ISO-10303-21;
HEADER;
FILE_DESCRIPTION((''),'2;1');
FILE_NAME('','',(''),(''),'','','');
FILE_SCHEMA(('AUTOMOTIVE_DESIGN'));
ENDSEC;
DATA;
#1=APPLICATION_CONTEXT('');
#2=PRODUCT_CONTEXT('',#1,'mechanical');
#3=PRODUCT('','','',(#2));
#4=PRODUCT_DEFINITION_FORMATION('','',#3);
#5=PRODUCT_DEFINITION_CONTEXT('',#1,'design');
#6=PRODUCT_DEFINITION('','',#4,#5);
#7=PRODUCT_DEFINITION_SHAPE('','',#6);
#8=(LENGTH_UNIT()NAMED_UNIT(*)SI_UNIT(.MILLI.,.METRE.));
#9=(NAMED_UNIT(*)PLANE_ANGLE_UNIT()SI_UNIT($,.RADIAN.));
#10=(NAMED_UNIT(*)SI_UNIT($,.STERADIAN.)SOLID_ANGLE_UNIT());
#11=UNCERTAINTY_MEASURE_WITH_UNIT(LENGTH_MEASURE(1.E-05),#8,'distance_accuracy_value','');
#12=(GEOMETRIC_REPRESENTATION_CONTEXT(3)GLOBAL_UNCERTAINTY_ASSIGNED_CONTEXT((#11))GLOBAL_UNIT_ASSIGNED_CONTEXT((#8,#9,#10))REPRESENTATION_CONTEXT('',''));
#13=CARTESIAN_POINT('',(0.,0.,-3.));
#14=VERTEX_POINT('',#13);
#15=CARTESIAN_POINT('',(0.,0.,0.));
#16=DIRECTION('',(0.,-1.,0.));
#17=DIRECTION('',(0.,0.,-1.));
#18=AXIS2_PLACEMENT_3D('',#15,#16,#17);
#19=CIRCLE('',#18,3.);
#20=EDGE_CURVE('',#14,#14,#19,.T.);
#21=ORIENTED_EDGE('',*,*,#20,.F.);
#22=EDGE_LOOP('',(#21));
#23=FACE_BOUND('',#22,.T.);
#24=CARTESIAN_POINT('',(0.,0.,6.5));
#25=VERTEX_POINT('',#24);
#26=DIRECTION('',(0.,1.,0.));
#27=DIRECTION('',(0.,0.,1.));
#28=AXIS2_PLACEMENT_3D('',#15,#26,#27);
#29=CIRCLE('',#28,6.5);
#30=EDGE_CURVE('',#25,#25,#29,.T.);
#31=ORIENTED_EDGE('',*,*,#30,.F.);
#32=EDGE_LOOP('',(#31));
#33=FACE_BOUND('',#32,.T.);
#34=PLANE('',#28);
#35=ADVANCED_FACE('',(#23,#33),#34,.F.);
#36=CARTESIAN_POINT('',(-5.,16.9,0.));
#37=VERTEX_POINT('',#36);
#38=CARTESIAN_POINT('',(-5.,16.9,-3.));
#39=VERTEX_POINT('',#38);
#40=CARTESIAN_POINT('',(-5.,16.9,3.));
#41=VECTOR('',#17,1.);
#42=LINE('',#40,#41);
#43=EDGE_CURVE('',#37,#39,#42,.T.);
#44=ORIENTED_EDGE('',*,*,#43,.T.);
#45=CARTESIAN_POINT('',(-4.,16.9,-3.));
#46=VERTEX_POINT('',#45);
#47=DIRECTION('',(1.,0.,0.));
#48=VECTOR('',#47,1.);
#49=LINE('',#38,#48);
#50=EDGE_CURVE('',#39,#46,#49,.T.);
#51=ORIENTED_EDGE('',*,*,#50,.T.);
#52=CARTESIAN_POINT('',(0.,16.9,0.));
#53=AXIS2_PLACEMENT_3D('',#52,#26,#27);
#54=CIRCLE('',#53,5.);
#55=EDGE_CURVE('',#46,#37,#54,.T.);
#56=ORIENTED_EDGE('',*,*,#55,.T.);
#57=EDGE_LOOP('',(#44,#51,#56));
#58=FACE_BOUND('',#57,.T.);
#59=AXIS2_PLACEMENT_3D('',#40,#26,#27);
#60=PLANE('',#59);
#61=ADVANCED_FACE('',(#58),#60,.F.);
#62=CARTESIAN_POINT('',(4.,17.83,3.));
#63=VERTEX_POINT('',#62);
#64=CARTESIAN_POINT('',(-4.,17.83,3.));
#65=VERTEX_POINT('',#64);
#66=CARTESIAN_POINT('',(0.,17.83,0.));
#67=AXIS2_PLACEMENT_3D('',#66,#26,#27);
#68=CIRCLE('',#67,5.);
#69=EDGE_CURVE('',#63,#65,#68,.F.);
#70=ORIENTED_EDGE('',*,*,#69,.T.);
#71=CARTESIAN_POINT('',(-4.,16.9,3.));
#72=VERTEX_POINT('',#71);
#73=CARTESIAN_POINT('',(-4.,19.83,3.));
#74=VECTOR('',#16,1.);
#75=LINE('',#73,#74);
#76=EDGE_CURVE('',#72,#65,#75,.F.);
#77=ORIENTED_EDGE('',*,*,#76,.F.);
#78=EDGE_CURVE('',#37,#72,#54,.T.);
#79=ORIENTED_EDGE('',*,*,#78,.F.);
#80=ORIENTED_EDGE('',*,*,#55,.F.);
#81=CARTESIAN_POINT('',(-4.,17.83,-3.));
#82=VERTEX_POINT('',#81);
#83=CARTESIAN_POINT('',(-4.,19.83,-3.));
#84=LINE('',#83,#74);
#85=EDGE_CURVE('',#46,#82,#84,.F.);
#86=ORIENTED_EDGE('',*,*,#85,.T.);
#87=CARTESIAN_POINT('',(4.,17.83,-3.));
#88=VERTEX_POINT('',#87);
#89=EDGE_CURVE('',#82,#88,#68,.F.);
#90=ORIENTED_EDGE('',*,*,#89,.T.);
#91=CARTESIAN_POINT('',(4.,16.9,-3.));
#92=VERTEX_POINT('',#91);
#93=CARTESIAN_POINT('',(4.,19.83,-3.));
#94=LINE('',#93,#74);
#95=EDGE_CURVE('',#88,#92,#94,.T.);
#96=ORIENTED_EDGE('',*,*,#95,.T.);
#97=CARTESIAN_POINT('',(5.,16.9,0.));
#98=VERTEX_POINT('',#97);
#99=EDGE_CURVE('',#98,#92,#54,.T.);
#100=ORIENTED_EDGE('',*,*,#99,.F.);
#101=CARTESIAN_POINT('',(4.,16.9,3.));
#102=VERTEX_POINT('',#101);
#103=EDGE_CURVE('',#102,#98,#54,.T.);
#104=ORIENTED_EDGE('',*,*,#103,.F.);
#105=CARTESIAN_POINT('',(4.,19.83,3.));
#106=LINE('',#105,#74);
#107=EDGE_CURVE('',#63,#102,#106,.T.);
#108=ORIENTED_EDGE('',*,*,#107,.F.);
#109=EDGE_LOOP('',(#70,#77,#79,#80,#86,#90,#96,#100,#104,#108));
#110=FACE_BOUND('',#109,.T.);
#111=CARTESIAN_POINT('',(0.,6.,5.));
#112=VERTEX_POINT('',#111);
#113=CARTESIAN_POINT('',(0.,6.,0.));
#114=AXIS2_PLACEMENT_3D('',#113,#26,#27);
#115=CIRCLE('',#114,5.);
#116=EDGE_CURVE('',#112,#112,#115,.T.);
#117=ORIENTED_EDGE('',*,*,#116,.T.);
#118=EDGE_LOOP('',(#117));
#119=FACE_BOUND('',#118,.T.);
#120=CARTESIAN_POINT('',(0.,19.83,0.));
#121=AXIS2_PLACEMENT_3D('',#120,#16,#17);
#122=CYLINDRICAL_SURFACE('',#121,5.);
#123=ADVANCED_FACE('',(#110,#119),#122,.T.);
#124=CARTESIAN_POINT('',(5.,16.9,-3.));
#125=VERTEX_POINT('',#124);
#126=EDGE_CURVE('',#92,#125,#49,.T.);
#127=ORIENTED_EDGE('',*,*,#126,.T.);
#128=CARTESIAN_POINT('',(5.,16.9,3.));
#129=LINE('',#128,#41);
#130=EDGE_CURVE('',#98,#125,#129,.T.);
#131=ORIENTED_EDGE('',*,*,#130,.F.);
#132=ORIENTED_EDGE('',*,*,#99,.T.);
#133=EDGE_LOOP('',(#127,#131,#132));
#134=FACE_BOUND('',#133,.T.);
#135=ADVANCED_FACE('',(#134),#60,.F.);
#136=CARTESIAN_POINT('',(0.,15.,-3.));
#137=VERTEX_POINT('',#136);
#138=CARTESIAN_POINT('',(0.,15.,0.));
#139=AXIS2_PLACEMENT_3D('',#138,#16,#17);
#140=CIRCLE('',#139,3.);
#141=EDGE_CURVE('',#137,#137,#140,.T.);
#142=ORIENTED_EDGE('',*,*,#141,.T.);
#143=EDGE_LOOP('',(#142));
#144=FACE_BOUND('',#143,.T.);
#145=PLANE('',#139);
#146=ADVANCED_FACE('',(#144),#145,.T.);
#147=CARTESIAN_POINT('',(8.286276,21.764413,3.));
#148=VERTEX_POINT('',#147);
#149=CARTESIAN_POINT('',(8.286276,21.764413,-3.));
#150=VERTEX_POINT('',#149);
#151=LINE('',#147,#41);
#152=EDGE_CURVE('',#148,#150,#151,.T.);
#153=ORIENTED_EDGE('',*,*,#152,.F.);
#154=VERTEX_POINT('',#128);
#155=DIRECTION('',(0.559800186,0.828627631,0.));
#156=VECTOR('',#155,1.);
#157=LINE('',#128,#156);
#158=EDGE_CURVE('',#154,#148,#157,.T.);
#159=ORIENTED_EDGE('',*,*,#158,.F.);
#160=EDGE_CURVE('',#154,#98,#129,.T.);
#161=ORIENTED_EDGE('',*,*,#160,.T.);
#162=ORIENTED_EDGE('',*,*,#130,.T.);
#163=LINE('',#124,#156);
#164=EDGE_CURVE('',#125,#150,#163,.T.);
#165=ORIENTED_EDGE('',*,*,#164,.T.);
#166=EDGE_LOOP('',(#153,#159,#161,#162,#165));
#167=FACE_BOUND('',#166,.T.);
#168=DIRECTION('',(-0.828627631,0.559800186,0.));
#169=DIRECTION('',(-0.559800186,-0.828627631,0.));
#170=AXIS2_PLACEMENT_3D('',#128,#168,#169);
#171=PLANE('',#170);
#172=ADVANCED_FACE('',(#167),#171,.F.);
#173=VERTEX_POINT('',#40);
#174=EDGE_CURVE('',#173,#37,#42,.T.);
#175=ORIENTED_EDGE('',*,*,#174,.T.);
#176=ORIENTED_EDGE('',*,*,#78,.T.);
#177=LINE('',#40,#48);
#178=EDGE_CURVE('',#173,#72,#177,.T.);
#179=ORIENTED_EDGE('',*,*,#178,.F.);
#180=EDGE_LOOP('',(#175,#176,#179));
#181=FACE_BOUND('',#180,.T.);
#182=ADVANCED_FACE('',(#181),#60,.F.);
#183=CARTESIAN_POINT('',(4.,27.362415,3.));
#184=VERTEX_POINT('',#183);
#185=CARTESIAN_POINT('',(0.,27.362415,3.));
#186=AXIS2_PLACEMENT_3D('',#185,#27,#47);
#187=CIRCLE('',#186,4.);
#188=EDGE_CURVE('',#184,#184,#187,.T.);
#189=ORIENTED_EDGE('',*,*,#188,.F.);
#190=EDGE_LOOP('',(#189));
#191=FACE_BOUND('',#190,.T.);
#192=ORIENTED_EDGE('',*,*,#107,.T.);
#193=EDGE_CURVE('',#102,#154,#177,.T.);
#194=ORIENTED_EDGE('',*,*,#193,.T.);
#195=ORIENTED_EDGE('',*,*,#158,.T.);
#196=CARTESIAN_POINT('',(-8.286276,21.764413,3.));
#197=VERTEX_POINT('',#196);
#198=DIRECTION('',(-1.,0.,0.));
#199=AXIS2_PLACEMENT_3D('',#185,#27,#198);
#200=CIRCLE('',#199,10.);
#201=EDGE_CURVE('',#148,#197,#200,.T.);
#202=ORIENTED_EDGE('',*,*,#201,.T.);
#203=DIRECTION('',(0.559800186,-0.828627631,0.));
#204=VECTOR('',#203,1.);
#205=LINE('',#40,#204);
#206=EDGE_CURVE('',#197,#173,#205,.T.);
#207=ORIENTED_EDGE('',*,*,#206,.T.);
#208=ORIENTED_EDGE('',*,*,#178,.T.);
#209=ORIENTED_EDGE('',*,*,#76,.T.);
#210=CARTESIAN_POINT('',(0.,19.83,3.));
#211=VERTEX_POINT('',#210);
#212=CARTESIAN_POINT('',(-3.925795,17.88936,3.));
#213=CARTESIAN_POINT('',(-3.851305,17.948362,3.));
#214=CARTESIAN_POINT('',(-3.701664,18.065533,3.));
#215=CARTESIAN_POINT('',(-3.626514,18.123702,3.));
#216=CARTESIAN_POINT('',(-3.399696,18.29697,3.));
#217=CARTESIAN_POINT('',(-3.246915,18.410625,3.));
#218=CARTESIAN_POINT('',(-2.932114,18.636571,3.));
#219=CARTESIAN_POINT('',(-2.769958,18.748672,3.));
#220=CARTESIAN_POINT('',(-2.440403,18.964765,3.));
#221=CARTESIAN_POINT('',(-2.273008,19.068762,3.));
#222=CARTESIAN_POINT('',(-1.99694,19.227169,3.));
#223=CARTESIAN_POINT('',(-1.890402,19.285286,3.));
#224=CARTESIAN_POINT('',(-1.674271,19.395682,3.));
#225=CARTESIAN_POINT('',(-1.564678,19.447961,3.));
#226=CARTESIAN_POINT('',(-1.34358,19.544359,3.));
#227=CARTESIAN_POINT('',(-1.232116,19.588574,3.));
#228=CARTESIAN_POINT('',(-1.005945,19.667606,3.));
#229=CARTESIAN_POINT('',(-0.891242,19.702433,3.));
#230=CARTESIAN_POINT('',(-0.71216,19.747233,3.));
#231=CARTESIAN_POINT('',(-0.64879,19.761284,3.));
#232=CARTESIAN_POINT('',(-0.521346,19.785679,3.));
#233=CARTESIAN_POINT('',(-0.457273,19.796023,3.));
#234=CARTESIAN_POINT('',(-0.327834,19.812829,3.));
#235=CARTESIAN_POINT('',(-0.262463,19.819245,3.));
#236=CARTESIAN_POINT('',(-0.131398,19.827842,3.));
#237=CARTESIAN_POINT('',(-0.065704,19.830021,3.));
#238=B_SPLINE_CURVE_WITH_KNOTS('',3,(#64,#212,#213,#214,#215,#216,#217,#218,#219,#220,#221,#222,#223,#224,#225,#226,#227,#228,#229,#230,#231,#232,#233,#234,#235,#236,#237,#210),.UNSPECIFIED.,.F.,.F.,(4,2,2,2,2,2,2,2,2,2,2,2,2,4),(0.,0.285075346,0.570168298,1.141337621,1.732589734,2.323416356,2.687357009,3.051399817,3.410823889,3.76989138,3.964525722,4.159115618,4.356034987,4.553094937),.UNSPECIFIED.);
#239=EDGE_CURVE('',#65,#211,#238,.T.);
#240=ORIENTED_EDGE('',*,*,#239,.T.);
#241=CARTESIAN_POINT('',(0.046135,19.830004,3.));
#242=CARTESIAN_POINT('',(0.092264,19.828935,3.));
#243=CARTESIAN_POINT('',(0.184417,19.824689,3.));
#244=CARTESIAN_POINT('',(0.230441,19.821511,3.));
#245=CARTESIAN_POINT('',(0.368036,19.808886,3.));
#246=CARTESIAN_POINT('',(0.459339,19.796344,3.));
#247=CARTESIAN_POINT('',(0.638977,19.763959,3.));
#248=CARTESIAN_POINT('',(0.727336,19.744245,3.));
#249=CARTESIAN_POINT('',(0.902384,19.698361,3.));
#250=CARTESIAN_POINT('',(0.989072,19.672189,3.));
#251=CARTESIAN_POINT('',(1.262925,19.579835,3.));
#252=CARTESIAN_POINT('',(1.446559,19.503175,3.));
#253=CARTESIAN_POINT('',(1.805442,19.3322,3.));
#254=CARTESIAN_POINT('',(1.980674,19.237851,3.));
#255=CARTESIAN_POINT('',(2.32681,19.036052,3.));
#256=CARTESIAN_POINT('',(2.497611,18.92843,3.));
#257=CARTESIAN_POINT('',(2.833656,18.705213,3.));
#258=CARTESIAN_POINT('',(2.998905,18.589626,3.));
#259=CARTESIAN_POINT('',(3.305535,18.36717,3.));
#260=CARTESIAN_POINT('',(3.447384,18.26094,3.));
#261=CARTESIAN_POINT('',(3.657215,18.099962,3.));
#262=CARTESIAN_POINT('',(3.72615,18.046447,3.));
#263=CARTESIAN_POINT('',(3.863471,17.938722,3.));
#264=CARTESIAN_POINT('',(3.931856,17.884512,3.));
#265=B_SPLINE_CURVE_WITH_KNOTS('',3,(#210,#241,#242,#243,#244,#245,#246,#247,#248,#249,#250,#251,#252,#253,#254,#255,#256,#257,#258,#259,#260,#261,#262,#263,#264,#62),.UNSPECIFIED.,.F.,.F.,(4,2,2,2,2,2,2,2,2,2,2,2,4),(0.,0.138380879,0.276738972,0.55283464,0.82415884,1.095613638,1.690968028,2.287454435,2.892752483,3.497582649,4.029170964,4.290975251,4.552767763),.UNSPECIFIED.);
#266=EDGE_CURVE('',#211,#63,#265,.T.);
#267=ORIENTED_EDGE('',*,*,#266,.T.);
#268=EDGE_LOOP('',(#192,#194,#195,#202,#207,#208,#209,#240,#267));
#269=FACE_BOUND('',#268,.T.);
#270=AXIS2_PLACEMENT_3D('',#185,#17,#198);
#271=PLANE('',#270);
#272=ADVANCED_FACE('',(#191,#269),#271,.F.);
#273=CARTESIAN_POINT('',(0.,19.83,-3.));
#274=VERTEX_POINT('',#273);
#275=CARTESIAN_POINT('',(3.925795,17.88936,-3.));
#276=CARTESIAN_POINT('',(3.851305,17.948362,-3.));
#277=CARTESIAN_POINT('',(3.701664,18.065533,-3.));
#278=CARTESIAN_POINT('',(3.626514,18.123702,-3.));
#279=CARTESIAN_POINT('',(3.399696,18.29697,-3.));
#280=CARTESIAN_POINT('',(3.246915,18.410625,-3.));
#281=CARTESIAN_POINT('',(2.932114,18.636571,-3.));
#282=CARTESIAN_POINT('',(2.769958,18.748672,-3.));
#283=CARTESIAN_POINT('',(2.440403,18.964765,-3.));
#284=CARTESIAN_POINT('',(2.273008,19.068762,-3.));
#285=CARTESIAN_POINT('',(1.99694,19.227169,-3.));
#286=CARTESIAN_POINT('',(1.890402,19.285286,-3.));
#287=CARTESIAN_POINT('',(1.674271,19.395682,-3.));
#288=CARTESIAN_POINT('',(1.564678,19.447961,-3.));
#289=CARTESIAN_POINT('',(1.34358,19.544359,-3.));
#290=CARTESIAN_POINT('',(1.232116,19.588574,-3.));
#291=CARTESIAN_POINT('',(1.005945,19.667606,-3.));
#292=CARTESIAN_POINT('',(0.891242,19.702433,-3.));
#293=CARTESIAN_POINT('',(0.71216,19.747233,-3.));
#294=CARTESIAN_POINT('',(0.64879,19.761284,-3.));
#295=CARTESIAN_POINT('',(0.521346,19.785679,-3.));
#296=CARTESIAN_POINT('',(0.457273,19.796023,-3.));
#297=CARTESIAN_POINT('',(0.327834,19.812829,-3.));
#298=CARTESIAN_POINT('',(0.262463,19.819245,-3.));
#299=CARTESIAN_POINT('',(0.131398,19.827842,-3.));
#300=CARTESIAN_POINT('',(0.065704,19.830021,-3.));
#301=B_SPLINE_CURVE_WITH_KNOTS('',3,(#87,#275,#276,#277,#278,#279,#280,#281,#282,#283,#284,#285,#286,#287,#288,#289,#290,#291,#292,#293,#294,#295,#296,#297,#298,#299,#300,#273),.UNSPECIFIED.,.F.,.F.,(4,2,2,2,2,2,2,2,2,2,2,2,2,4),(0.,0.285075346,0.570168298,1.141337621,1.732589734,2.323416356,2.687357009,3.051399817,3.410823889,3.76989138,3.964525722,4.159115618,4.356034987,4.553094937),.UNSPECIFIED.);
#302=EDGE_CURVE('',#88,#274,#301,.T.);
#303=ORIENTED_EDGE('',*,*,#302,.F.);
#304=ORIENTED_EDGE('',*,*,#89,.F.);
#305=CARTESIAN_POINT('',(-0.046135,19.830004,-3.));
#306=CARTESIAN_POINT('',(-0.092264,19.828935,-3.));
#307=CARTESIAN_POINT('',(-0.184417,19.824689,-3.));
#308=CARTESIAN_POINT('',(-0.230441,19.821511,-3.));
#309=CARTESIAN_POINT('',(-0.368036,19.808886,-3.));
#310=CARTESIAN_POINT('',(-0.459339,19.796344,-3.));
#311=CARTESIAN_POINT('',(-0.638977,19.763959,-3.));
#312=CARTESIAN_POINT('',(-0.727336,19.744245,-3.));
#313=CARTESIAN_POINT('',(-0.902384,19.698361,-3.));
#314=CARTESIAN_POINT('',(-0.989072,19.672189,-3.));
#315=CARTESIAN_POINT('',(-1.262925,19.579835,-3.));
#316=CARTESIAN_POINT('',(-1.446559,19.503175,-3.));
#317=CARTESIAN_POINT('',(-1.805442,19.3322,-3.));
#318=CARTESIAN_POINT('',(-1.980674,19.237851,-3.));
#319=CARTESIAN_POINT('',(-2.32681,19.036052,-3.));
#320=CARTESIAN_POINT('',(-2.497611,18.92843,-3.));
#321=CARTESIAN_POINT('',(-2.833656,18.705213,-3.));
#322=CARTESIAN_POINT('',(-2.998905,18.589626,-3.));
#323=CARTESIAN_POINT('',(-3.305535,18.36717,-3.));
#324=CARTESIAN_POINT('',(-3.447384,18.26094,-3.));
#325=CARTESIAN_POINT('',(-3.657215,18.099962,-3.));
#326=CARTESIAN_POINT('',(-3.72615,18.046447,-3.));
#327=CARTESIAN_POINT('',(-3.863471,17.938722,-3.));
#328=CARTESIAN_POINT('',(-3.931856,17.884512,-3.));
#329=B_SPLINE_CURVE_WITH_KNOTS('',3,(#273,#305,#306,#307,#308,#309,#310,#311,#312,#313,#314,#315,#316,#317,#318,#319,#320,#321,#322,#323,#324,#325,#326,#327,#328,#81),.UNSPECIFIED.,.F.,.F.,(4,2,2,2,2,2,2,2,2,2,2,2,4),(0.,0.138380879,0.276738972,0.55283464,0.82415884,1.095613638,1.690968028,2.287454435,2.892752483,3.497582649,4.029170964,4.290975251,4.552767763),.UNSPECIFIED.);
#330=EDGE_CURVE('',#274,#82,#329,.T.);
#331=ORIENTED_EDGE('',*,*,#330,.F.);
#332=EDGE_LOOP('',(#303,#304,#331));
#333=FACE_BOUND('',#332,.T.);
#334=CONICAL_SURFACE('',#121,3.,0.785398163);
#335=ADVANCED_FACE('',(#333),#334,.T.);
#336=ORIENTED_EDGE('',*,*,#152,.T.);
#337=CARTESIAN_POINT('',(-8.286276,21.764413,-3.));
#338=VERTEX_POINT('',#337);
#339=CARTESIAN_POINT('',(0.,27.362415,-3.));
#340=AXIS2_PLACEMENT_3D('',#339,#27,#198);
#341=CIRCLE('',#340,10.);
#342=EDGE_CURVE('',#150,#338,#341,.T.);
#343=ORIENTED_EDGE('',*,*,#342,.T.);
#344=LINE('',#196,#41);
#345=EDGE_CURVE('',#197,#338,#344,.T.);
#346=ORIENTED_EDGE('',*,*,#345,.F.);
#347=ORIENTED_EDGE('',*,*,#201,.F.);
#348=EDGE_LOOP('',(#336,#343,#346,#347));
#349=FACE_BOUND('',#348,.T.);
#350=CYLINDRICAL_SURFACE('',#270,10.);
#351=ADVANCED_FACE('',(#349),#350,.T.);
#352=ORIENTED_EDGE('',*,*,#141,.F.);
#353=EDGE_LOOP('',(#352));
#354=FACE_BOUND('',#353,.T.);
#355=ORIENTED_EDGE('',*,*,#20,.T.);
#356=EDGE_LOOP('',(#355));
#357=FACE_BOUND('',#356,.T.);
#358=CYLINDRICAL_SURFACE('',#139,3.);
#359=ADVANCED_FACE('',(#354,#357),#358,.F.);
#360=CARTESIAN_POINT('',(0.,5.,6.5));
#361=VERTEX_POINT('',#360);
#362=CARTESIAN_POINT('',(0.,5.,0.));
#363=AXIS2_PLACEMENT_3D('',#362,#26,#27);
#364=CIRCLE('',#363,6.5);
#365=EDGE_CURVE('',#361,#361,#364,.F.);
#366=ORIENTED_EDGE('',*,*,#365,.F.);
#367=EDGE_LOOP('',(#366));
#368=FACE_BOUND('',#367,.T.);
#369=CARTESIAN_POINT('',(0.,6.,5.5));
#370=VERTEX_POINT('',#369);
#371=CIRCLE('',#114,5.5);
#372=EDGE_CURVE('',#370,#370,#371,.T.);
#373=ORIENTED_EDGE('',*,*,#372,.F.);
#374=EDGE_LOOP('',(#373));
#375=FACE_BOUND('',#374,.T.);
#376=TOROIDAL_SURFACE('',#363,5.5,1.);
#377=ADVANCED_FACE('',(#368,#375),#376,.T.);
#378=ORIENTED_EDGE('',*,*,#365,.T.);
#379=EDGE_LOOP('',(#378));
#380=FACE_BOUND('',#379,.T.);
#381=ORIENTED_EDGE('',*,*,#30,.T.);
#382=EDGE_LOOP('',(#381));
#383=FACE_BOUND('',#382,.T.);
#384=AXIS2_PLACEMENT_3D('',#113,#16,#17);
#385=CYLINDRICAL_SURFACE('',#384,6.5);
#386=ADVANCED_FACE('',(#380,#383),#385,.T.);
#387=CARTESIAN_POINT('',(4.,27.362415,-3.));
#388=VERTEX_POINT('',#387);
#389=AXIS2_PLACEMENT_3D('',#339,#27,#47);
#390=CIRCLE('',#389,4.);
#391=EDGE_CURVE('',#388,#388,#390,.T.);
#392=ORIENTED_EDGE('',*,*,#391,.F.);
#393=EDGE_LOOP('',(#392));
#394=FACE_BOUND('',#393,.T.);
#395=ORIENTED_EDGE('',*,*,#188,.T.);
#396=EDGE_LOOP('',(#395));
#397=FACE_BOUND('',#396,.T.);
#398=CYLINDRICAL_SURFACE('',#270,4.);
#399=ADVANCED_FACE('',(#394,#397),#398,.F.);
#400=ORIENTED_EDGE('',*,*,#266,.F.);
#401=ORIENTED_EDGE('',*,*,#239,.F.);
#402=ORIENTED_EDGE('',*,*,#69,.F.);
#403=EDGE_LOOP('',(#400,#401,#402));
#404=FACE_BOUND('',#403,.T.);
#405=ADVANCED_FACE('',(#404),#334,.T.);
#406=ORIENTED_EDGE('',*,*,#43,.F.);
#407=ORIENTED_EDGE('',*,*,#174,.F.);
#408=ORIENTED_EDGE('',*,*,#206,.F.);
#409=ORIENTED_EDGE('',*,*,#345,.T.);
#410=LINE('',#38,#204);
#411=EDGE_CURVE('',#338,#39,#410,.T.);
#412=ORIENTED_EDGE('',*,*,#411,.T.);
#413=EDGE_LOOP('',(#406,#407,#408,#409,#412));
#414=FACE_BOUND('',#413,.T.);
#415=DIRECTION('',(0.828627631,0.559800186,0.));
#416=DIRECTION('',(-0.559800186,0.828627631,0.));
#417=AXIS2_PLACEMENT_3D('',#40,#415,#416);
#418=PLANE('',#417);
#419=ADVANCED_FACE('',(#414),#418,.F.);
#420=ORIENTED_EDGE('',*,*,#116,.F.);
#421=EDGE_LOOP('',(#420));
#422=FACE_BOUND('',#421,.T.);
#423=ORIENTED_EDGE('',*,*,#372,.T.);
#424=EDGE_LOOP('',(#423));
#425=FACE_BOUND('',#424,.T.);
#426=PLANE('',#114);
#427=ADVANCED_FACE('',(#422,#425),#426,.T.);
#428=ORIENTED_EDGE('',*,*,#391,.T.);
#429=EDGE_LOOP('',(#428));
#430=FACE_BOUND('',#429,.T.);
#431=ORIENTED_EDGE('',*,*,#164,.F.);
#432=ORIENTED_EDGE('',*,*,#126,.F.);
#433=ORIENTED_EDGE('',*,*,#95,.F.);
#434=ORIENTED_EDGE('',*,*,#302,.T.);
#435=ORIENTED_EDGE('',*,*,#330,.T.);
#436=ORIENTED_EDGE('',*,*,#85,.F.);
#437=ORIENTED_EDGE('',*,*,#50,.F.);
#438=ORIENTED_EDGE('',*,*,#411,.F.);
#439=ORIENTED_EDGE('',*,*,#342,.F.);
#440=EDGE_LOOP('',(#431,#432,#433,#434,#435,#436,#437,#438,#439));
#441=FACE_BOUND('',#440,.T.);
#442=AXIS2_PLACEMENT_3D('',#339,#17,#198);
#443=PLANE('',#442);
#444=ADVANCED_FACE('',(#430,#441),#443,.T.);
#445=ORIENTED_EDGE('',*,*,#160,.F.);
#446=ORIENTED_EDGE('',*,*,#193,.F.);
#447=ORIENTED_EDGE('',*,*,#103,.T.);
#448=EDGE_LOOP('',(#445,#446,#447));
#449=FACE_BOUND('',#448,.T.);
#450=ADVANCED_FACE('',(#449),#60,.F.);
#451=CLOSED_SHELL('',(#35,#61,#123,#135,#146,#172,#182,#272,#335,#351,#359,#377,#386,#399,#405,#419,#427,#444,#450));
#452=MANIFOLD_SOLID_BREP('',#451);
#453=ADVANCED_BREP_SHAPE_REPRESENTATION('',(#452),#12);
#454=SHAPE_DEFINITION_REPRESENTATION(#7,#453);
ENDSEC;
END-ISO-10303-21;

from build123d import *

# Parameters (mm, degrees)
SKETCH1_R           = 6.5
BOSS_EXTRUDE1_DEPTH = 6
FILLET1_R           = 1
SKETCH3_R           = 5
BOSS_EXTRUDE2_DEPTH = 13.83
SKETCH2_R           = 3
CUT_EXTRUDE1_DEPTH  = 15
SKETCH4_R           = 4
BOSS_EXTRUDE4_DEPTH = 3
CHAMFER2_SIZE       = 2


with BuildPart() as part:
    # Sketch1 → Boss-Extrude1 (new body)
    with BuildSketch(Plane(origin=(0, 0, 0), x_dir=(1, 0, 0), z_dir=(0, 1, 0))):
        with Locations(Location((0, 0, 0), (0, 0, 270))):
            Circle(SKETCH1_R)
    extrude(amount=BOSS_EXTRUDE1_DEPTH)

    # Fillet1
    fillet1_edges = [part.edges().sort_by_distance(p)[0] for p in [
        (0, 6, -6.5),
    ]]
    fillet(fillet1_edges, radius=FILLET1_R)

    # Sketch3 → Boss-Extrude2 (add)
    with BuildSketch(Plane(origin=(0, 6, 0), x_dir=(1, 0, 0), z_dir=(0, 1, 0))):
        with Locations(Location((0, 0, 0), (0, 0, 270))):
            Circle(SKETCH3_R)
    extrude(amount=BOSS_EXTRUDE2_DEPTH)

    # Sketch2 → Cut-Extrude1 (cut)
    with BuildSketch(Plane.XZ):
        with Locations(Location((0, 0, 0), (0, 0, 270))):
            Circle(SKETCH2_R)
    extrude(amount=-CUT_EXTRUDE1_DEPTH, mode=Mode.SUBTRACT)

    # Sketch4 → Boss-Extrude4 (add, symmetric)
    with BuildSketch(Plane.XY):
        with BuildLine():
            Line((-5, 16.9), (-8.286276315, 21.764413101))
            ThreePointArc((-8.286276315, 21.764413101), (0, 37.362414962), (8.286276315, 21.764413101))
            Line((8.286276315, 21.764413101), (5, 16.9))
            Line((5, 16.9), (-5, 16.9))
        make_face()
        with Locations((0, 27.362414962)):
            Circle(SKETCH4_R, mode=Mode.SUBTRACT)
    extrude(amount=BOSS_EXTRUDE4_DEPTH, both=True)

    # Chamfer2
    chamfer2_edges = [part.edges().sort_by_distance(p)[0] for p in [
        (0, 19.83, -5),
        (2.236067977, 19.83, 4.472135955),
    ]]
    chamfer(chamfer2_edges, length=CHAMFER2_SIZE - 0.0001)  # a hair under: the kernel refuses the full size


solid = part.part
